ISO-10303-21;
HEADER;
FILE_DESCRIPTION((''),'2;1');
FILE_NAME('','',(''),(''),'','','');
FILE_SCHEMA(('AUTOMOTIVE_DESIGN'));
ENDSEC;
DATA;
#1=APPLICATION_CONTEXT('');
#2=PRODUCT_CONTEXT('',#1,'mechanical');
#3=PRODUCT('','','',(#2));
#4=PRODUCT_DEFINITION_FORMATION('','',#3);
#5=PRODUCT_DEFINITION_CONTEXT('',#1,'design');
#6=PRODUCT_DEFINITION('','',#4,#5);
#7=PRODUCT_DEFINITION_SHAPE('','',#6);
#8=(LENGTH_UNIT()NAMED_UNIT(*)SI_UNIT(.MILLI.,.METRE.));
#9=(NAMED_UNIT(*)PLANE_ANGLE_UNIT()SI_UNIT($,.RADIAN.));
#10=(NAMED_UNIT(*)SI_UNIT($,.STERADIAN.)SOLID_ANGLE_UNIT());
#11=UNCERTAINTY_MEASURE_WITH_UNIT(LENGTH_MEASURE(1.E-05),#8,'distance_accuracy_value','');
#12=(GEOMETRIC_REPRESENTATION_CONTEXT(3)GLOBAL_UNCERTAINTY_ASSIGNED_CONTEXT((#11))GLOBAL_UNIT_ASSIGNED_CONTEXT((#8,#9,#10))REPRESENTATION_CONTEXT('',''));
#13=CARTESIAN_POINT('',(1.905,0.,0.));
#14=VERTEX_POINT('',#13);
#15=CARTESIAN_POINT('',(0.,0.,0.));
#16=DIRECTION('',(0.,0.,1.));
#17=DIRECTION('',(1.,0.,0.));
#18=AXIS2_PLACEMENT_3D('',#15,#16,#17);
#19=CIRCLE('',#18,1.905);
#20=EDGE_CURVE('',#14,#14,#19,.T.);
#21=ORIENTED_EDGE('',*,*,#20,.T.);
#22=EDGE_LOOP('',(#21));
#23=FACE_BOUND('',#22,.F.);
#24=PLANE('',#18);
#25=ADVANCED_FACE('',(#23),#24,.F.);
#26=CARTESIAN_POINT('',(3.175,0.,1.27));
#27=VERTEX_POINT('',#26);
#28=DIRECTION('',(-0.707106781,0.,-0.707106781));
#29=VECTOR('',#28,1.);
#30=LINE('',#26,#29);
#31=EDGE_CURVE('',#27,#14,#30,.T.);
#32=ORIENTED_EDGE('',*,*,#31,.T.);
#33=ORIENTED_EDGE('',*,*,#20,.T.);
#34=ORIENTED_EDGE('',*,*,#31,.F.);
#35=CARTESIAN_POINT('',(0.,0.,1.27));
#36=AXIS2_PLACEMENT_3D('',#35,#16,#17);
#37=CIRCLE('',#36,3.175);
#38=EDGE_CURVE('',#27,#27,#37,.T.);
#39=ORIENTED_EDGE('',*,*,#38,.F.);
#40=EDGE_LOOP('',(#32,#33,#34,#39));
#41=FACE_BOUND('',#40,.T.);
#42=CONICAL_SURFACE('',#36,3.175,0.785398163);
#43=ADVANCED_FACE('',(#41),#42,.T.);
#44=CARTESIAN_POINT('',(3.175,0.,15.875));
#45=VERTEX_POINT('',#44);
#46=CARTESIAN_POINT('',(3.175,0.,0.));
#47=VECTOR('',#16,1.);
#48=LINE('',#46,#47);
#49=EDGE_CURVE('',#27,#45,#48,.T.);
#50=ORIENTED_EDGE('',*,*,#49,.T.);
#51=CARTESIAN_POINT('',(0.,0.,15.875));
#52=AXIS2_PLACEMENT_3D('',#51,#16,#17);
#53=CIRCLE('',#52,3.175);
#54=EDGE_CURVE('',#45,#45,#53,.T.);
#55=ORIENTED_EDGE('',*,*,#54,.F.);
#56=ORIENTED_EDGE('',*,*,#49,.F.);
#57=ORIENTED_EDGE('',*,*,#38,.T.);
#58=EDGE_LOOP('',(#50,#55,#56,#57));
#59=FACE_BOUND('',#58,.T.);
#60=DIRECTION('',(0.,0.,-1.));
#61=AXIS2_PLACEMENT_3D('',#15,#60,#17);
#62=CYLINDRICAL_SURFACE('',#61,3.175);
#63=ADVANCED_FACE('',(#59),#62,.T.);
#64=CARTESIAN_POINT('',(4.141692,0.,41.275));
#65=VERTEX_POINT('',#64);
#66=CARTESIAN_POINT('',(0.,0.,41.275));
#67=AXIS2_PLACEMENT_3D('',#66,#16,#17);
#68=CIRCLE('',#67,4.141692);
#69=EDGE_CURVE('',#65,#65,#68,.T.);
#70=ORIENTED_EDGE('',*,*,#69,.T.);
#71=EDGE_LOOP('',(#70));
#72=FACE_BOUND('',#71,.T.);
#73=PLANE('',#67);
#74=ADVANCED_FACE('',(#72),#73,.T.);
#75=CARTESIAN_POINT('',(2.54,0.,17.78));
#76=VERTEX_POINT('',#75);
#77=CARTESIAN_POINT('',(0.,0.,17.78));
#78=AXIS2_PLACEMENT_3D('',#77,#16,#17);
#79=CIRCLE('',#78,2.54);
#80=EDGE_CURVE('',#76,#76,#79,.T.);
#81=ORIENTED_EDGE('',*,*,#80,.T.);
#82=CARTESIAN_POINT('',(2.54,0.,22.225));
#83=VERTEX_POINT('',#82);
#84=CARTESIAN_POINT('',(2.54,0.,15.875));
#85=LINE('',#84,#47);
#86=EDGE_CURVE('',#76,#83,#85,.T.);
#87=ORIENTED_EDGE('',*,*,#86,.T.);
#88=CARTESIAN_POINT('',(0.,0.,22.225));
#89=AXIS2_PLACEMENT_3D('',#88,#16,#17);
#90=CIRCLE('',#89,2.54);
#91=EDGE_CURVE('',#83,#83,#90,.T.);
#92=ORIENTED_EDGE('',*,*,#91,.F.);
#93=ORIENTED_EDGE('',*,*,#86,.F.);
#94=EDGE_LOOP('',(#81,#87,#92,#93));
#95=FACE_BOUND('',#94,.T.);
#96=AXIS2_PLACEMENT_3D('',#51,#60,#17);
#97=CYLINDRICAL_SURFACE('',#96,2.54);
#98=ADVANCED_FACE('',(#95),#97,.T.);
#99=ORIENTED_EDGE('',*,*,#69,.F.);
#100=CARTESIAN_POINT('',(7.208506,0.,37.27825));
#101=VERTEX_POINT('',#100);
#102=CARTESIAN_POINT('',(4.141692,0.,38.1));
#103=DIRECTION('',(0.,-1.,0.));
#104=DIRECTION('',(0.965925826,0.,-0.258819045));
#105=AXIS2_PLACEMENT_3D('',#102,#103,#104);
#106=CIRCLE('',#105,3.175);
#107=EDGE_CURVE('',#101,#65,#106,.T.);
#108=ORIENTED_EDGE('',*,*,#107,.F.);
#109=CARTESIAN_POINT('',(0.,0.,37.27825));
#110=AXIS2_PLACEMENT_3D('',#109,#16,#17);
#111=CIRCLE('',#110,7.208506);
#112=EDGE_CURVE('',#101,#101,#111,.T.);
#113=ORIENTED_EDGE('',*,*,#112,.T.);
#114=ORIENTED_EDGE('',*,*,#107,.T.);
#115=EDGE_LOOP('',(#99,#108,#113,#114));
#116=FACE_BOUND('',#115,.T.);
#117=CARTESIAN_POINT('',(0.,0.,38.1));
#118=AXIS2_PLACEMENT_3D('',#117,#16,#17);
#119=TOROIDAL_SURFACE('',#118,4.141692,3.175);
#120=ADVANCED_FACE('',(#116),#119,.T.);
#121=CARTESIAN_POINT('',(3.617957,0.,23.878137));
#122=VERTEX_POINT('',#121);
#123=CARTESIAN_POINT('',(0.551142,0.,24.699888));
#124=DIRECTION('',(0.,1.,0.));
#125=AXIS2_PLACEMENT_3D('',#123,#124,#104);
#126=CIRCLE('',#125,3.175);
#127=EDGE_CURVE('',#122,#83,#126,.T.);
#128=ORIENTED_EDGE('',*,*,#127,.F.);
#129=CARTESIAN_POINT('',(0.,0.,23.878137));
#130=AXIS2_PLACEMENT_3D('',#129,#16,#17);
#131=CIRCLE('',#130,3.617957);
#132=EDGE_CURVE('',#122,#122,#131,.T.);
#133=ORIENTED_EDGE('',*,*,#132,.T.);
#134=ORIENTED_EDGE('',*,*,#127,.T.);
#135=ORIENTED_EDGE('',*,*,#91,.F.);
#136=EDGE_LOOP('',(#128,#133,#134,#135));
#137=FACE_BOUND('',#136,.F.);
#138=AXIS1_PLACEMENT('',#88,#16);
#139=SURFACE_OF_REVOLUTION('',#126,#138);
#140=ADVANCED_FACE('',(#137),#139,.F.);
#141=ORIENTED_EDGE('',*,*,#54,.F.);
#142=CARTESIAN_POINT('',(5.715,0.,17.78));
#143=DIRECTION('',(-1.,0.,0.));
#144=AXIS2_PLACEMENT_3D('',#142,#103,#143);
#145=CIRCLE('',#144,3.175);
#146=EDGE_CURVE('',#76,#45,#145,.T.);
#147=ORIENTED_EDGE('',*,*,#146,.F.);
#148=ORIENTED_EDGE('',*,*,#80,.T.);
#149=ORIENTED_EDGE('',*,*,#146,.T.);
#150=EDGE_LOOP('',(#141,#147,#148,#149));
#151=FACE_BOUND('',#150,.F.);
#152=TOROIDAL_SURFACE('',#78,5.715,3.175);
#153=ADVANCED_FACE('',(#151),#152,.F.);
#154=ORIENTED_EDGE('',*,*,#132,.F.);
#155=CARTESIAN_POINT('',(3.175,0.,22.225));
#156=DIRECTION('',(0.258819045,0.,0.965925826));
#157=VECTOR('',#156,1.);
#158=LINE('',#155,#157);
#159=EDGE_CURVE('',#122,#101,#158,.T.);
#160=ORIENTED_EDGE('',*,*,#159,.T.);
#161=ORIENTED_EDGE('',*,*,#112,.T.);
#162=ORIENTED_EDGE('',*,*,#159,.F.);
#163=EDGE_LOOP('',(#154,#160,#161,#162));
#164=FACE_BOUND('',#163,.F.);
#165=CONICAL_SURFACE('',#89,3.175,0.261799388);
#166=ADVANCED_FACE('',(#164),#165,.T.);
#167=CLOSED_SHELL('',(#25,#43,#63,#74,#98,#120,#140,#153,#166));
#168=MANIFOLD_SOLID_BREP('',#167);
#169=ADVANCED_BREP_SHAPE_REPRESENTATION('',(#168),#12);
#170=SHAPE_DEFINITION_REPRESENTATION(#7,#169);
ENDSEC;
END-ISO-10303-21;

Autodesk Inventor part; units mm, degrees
ref_plane "YZ Plane" through (0, 0, 0) normal (1, 0, 0) x (0, 1, 0)
ref_plane "XZ Plane" through (0, 0, 0) normal (0, 1, 0) x (-1, 0, 0)
ref_plane "XY Plane" through (0, 0, 0) normal (0, 0, 1) x (1, 0, 0)
sketch "Sketch1" plane through (0, 0, 0) normal (0, 0, 1) x (1, 0, 0)
  circle A0 centre (0, 0) radius 3.175
  dimension "d0" = 6.35
extrude "Extrusion1" add sketch "Sketch1" along normal blind 15.875
thread "Thread1" size "1/4-20 UNC" class "2A" standard "ANSI Unified Screw Threads" full length
chamfer "Chamfer1" distance 1.27 angle 45 1 edges at (-3.175, 0, 0)
sketch "Sketch3" plane through (0, 0, 15.875) normal (0, 0, 1) x (1, 0, 0)
  circle A0 centre (0, 0) radius 2.54
  dimension "d11" = 5.08
extrude "Extrusion3" add sketch "Sketch3" along normal blind 6.35
sketch "Sketch4" plane through (0, 0, 22.225) normal (0, 0, 1) x (1, 0, 0)
  circle A0 centre (0, 0) radius 3.175
  dimension "d14" = 6.35
extrude "Extrusion4" add sketch "Sketch4" along normal blind 19.05 draft 15
fillet "Fillet2" radius 3.175 3 edges at (-8.2794, 0, 41.275) (-3.175, 0, 22.225) (-2.54, 0, 15.875)
properties part number "peg"
